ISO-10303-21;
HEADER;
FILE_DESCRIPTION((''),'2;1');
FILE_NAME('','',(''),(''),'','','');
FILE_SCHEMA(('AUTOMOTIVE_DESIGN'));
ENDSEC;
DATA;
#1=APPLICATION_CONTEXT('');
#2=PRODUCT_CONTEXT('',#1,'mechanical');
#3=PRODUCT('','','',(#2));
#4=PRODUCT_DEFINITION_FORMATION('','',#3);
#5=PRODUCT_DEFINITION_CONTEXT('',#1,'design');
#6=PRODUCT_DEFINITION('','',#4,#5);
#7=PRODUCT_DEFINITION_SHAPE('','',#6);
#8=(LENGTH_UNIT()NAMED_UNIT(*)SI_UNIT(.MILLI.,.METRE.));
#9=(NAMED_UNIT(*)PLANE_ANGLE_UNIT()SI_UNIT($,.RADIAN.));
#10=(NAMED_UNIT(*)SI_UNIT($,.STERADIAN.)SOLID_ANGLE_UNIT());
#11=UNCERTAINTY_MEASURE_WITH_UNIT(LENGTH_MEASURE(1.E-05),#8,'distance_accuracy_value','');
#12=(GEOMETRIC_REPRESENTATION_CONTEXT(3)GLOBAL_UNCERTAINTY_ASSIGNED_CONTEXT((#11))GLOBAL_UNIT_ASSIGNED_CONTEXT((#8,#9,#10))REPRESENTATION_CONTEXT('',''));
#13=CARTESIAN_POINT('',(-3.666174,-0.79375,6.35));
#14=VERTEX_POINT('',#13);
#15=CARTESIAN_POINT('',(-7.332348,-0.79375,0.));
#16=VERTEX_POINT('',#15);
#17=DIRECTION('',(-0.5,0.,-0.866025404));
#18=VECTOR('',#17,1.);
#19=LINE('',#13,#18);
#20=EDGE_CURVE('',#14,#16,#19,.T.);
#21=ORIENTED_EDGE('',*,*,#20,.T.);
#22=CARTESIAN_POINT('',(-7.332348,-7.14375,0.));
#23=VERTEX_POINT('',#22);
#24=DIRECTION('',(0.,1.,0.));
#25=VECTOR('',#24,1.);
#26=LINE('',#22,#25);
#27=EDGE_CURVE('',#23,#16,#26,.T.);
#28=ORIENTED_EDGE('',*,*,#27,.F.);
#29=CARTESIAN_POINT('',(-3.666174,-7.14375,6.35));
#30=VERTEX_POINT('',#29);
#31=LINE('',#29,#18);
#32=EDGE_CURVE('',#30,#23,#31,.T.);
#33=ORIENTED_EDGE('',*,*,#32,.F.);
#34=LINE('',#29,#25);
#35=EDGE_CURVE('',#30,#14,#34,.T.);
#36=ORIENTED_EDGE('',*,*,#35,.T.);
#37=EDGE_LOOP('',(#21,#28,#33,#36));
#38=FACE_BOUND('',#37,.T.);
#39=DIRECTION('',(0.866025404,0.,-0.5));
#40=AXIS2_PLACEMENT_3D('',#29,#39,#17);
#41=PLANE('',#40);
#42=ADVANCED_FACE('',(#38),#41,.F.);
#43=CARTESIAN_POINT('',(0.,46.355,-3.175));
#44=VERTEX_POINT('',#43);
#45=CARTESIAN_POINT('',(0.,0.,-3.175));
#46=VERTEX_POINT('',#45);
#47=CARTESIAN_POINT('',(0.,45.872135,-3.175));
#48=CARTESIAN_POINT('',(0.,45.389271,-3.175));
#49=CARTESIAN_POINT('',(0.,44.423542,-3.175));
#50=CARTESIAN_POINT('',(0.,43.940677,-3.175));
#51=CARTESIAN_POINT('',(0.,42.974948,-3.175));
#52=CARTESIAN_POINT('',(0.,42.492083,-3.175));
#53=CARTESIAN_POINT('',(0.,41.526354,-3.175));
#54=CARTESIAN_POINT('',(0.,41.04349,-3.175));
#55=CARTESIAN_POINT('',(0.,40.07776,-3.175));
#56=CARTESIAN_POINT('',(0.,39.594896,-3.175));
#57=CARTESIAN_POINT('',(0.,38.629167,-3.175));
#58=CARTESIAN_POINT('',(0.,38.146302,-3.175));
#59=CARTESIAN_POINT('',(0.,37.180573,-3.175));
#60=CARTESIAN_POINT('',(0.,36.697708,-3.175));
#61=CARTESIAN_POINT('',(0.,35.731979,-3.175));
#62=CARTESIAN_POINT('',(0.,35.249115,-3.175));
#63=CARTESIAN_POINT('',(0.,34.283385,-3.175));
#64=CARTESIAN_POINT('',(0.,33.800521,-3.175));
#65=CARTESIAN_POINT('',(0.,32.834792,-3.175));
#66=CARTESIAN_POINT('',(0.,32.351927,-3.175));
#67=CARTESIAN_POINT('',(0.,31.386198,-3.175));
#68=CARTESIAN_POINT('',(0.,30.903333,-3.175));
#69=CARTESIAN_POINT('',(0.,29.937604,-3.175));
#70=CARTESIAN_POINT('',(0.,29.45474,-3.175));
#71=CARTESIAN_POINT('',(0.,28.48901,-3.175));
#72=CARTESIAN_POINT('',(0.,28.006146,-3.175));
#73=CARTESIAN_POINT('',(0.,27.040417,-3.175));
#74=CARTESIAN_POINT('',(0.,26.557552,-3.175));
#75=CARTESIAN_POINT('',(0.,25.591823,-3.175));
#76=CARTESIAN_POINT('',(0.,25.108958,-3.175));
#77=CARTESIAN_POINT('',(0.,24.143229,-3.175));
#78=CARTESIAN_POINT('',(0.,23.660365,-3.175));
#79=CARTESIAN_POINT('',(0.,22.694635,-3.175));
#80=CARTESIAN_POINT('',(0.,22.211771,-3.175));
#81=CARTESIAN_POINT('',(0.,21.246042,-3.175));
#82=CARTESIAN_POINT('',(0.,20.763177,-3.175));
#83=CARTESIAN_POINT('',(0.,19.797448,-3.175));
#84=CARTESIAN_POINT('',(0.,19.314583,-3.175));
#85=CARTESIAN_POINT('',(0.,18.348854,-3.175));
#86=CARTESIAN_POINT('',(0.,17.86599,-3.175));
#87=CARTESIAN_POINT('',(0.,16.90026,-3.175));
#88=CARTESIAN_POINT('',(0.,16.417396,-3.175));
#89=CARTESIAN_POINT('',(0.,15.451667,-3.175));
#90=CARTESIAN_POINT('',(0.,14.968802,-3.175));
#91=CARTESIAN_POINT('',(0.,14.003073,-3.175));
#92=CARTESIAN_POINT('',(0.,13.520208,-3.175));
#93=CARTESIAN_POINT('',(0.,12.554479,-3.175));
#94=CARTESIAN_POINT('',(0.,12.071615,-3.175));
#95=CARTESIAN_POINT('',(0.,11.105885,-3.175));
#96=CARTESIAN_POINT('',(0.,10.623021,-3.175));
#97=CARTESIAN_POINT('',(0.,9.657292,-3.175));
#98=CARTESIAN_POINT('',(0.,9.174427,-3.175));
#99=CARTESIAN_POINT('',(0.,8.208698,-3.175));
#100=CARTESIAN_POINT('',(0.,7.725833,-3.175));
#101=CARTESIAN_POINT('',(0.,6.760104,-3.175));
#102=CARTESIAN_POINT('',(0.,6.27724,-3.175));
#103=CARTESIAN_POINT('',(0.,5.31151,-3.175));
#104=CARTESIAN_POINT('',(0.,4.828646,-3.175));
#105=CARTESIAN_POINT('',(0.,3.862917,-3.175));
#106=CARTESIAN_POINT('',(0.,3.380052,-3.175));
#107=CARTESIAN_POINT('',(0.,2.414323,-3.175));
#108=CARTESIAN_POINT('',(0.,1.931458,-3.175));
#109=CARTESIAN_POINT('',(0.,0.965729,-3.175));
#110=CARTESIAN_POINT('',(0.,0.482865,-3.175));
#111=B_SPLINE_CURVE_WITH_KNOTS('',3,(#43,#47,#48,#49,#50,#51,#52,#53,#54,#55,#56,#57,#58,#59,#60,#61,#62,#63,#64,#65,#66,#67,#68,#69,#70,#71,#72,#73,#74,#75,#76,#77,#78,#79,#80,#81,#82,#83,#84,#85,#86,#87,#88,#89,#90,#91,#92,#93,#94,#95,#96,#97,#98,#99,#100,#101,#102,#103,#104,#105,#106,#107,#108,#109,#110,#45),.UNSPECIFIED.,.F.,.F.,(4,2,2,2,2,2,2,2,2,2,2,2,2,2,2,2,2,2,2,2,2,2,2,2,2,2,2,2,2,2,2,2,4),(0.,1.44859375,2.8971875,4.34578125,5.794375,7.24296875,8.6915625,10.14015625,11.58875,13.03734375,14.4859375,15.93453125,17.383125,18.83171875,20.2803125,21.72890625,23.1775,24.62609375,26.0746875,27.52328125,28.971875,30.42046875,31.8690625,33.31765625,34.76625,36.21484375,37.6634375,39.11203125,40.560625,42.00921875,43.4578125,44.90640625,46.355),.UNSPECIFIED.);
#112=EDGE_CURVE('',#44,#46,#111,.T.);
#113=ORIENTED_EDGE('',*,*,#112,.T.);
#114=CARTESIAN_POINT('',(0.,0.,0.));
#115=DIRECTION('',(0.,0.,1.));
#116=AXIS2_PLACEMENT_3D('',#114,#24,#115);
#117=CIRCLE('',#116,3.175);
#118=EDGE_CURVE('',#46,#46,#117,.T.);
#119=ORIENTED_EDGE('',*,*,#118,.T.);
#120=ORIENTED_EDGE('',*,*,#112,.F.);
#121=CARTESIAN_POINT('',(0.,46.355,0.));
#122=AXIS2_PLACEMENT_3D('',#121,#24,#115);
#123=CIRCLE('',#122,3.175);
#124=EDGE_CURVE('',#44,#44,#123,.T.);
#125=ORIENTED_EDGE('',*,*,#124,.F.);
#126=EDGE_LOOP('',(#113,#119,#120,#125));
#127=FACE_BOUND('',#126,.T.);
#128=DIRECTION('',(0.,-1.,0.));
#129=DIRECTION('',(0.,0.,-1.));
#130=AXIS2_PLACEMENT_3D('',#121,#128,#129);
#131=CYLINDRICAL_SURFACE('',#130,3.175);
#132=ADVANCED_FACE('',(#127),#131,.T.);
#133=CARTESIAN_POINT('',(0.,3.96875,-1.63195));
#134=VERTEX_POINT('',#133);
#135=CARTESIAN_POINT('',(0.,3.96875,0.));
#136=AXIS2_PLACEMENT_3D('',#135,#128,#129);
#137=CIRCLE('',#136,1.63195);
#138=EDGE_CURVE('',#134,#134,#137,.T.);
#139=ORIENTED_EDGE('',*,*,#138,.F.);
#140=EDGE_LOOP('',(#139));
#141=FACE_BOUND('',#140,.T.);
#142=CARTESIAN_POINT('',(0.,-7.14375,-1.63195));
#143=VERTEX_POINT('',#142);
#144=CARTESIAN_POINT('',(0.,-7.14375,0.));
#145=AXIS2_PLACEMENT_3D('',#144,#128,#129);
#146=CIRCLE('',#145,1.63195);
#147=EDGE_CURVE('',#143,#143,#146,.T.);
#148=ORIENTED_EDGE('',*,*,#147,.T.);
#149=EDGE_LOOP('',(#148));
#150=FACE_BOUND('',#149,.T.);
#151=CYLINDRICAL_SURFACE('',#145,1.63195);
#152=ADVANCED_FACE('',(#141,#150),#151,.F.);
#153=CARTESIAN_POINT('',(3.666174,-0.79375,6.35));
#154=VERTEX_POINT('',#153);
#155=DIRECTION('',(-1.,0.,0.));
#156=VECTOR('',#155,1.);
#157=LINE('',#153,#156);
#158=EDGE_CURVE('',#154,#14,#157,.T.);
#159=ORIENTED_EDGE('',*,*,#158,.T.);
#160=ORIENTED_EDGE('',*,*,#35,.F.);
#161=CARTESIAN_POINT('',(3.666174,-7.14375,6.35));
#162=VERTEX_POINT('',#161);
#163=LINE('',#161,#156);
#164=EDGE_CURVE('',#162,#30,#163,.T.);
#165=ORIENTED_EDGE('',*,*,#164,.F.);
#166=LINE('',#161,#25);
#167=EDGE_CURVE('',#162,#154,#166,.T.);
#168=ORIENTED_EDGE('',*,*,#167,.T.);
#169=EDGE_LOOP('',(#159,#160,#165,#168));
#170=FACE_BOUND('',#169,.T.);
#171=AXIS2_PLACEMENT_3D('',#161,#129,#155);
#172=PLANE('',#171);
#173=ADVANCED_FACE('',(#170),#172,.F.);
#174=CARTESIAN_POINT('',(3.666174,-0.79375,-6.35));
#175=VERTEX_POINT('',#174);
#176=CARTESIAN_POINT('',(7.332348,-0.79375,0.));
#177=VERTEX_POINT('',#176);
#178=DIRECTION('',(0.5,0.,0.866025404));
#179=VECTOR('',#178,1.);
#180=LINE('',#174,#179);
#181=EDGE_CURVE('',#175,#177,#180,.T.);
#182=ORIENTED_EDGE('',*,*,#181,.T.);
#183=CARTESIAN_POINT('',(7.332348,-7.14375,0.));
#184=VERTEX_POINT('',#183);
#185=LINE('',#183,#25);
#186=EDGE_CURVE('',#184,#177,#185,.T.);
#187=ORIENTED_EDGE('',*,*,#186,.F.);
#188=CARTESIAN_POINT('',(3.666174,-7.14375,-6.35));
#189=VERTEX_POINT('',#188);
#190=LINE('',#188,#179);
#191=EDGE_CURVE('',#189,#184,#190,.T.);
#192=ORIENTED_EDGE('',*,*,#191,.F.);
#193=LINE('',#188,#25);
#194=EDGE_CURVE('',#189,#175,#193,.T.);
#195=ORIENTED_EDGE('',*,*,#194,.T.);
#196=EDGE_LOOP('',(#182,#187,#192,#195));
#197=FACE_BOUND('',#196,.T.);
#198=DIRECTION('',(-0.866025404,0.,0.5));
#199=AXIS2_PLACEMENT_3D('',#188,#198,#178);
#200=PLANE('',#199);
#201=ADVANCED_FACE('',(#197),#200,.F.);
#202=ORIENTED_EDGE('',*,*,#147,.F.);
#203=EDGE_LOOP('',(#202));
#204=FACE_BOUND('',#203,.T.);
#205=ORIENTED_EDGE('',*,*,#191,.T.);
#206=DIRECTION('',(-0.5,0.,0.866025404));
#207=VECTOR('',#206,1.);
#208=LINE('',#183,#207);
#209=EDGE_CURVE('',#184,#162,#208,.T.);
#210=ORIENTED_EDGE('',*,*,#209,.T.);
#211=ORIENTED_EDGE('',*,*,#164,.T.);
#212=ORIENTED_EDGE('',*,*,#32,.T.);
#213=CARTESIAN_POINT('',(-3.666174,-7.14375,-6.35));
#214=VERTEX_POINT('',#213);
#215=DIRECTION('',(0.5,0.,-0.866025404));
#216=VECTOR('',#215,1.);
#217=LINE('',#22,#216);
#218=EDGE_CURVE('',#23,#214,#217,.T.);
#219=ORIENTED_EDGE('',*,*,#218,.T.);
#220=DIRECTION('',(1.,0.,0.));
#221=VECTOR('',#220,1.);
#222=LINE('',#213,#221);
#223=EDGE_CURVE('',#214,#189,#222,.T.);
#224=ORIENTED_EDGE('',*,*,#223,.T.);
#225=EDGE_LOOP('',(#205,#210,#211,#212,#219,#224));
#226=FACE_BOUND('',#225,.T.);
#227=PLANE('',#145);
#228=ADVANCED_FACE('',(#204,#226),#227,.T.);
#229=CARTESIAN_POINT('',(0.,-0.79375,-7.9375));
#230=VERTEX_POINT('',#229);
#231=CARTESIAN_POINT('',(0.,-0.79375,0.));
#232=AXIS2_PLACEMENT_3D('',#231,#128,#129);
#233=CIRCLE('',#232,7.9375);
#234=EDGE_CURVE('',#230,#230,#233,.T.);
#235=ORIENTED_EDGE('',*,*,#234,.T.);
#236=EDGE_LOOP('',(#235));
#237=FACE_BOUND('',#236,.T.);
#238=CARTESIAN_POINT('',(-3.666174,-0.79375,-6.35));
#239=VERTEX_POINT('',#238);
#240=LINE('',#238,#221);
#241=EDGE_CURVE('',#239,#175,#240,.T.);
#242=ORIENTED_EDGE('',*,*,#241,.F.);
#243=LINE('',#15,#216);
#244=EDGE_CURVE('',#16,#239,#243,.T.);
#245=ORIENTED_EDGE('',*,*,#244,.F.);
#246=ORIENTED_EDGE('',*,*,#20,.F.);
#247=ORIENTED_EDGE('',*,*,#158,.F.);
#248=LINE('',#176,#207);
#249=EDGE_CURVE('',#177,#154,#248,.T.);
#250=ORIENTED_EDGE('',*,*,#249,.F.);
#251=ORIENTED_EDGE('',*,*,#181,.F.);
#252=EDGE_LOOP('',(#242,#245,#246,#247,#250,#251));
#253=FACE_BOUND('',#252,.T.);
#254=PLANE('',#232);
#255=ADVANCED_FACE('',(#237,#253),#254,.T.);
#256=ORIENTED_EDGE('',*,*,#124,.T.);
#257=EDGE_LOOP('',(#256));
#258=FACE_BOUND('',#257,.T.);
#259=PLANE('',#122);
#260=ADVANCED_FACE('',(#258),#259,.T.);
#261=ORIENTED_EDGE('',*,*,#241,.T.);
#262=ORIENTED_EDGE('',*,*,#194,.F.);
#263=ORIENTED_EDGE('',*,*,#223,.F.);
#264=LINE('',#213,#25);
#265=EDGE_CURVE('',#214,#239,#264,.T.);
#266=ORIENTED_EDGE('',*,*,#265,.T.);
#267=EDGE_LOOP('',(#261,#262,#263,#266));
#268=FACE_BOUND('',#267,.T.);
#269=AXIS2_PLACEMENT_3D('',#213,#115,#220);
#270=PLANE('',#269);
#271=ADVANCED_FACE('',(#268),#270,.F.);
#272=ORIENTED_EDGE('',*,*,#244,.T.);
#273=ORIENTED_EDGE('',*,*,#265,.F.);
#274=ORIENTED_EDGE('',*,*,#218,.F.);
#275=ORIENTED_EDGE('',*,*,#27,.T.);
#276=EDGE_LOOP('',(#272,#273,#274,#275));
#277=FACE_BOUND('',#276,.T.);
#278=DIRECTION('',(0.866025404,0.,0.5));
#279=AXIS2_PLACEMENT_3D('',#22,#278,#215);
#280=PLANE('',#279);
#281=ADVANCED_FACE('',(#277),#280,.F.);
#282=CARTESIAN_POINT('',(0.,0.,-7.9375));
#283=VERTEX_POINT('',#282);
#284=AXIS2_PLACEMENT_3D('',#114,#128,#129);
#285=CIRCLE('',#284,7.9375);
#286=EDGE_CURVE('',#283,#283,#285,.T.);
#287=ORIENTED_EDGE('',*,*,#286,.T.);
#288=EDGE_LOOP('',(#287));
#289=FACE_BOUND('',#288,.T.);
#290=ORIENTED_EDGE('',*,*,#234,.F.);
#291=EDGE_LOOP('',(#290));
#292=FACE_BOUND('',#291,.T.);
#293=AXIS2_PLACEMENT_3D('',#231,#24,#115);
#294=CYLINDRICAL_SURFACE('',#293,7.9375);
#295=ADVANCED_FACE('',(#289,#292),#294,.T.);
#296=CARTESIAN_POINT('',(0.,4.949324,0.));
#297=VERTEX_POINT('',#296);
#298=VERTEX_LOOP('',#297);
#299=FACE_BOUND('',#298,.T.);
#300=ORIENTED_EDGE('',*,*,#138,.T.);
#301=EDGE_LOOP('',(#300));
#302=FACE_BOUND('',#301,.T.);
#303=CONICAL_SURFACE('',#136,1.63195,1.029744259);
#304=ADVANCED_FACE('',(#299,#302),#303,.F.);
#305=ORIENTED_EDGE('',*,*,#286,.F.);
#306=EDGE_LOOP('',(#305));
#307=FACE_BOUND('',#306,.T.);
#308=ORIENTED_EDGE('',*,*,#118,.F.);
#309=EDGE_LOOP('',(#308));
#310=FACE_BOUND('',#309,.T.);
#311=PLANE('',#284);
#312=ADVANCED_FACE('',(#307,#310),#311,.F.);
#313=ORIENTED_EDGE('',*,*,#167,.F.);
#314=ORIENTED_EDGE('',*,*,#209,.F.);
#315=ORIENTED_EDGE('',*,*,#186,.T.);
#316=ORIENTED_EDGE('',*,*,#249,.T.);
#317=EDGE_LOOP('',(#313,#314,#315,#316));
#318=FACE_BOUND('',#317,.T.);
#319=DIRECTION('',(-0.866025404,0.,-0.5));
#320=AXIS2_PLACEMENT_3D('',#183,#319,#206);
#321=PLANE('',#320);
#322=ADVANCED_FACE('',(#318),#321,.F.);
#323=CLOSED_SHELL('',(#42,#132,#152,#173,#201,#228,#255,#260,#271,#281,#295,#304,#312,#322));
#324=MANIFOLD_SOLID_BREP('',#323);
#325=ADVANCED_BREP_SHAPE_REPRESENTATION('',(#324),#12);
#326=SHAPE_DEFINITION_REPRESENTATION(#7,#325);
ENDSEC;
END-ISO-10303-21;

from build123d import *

# Parameters (mm, degrees)
SKETCH1_R           = 3.175
BOSS_EXTRUDE1_DEPTH = 46.355
SKETCH3_R           = 7.9375
BOSS_EXTRUDE3_DEPTH = 0.79375
BOSS_EXTRUDE4_DEPTH = 6.35


# Read off the part's stored shape, not the designer's step: AdvancedHole1
with BuildPart() as part:
    # Sketch1 → Boss-Extrude1 (new body)
    with BuildSketch(Plane(origin=(0, 0, 0), x_dir=(1, 0, 0), z_dir=(0, 1, 0))):
        with Locations(Location((0, 0, 0), (0, 0, 90))):
            Circle(SKETCH1_R)
    extrude(amount=BOSS_EXTRUDE1_DEPTH)

    # Sketch3 → Boss-Extrude3 (add)
    with BuildSketch(Plane.XZ):
        with Locations(Location((0, 0, 0), (0, 0, 270))):
            Circle(SKETCH3_R)
    extrude(amount=BOSS_EXTRUDE3_DEPTH)

    # Sketch4 → Boss-Extrude4 (add)
    with BuildSketch(Plane.XZ.offset(0.79375)):
        Polygon((3.666174209, 6.35), (-3.666174209, 6.35), (-7.332348419, 0), (-3.666174209, -6.35), (3.666174209, -6.35), (7.332348419, 0), align=None)
    extrude(amount=BOSS_EXTRUDE4_DEPTH)

    # AdvancedHole1 outline → AdvancedHole1 (revolve, cut)
    with BuildSketch(Plane.XY):
        Polygon((1.63195, -7.14375), (1.63195, 3.96875), (0, 4.949324487), (0, -7.14375), align=None)
    revolve(axis=Axis((0, 0, 0), (0, 1, 0)), mode=Mode.SUBTRACT)


solid = part.part
